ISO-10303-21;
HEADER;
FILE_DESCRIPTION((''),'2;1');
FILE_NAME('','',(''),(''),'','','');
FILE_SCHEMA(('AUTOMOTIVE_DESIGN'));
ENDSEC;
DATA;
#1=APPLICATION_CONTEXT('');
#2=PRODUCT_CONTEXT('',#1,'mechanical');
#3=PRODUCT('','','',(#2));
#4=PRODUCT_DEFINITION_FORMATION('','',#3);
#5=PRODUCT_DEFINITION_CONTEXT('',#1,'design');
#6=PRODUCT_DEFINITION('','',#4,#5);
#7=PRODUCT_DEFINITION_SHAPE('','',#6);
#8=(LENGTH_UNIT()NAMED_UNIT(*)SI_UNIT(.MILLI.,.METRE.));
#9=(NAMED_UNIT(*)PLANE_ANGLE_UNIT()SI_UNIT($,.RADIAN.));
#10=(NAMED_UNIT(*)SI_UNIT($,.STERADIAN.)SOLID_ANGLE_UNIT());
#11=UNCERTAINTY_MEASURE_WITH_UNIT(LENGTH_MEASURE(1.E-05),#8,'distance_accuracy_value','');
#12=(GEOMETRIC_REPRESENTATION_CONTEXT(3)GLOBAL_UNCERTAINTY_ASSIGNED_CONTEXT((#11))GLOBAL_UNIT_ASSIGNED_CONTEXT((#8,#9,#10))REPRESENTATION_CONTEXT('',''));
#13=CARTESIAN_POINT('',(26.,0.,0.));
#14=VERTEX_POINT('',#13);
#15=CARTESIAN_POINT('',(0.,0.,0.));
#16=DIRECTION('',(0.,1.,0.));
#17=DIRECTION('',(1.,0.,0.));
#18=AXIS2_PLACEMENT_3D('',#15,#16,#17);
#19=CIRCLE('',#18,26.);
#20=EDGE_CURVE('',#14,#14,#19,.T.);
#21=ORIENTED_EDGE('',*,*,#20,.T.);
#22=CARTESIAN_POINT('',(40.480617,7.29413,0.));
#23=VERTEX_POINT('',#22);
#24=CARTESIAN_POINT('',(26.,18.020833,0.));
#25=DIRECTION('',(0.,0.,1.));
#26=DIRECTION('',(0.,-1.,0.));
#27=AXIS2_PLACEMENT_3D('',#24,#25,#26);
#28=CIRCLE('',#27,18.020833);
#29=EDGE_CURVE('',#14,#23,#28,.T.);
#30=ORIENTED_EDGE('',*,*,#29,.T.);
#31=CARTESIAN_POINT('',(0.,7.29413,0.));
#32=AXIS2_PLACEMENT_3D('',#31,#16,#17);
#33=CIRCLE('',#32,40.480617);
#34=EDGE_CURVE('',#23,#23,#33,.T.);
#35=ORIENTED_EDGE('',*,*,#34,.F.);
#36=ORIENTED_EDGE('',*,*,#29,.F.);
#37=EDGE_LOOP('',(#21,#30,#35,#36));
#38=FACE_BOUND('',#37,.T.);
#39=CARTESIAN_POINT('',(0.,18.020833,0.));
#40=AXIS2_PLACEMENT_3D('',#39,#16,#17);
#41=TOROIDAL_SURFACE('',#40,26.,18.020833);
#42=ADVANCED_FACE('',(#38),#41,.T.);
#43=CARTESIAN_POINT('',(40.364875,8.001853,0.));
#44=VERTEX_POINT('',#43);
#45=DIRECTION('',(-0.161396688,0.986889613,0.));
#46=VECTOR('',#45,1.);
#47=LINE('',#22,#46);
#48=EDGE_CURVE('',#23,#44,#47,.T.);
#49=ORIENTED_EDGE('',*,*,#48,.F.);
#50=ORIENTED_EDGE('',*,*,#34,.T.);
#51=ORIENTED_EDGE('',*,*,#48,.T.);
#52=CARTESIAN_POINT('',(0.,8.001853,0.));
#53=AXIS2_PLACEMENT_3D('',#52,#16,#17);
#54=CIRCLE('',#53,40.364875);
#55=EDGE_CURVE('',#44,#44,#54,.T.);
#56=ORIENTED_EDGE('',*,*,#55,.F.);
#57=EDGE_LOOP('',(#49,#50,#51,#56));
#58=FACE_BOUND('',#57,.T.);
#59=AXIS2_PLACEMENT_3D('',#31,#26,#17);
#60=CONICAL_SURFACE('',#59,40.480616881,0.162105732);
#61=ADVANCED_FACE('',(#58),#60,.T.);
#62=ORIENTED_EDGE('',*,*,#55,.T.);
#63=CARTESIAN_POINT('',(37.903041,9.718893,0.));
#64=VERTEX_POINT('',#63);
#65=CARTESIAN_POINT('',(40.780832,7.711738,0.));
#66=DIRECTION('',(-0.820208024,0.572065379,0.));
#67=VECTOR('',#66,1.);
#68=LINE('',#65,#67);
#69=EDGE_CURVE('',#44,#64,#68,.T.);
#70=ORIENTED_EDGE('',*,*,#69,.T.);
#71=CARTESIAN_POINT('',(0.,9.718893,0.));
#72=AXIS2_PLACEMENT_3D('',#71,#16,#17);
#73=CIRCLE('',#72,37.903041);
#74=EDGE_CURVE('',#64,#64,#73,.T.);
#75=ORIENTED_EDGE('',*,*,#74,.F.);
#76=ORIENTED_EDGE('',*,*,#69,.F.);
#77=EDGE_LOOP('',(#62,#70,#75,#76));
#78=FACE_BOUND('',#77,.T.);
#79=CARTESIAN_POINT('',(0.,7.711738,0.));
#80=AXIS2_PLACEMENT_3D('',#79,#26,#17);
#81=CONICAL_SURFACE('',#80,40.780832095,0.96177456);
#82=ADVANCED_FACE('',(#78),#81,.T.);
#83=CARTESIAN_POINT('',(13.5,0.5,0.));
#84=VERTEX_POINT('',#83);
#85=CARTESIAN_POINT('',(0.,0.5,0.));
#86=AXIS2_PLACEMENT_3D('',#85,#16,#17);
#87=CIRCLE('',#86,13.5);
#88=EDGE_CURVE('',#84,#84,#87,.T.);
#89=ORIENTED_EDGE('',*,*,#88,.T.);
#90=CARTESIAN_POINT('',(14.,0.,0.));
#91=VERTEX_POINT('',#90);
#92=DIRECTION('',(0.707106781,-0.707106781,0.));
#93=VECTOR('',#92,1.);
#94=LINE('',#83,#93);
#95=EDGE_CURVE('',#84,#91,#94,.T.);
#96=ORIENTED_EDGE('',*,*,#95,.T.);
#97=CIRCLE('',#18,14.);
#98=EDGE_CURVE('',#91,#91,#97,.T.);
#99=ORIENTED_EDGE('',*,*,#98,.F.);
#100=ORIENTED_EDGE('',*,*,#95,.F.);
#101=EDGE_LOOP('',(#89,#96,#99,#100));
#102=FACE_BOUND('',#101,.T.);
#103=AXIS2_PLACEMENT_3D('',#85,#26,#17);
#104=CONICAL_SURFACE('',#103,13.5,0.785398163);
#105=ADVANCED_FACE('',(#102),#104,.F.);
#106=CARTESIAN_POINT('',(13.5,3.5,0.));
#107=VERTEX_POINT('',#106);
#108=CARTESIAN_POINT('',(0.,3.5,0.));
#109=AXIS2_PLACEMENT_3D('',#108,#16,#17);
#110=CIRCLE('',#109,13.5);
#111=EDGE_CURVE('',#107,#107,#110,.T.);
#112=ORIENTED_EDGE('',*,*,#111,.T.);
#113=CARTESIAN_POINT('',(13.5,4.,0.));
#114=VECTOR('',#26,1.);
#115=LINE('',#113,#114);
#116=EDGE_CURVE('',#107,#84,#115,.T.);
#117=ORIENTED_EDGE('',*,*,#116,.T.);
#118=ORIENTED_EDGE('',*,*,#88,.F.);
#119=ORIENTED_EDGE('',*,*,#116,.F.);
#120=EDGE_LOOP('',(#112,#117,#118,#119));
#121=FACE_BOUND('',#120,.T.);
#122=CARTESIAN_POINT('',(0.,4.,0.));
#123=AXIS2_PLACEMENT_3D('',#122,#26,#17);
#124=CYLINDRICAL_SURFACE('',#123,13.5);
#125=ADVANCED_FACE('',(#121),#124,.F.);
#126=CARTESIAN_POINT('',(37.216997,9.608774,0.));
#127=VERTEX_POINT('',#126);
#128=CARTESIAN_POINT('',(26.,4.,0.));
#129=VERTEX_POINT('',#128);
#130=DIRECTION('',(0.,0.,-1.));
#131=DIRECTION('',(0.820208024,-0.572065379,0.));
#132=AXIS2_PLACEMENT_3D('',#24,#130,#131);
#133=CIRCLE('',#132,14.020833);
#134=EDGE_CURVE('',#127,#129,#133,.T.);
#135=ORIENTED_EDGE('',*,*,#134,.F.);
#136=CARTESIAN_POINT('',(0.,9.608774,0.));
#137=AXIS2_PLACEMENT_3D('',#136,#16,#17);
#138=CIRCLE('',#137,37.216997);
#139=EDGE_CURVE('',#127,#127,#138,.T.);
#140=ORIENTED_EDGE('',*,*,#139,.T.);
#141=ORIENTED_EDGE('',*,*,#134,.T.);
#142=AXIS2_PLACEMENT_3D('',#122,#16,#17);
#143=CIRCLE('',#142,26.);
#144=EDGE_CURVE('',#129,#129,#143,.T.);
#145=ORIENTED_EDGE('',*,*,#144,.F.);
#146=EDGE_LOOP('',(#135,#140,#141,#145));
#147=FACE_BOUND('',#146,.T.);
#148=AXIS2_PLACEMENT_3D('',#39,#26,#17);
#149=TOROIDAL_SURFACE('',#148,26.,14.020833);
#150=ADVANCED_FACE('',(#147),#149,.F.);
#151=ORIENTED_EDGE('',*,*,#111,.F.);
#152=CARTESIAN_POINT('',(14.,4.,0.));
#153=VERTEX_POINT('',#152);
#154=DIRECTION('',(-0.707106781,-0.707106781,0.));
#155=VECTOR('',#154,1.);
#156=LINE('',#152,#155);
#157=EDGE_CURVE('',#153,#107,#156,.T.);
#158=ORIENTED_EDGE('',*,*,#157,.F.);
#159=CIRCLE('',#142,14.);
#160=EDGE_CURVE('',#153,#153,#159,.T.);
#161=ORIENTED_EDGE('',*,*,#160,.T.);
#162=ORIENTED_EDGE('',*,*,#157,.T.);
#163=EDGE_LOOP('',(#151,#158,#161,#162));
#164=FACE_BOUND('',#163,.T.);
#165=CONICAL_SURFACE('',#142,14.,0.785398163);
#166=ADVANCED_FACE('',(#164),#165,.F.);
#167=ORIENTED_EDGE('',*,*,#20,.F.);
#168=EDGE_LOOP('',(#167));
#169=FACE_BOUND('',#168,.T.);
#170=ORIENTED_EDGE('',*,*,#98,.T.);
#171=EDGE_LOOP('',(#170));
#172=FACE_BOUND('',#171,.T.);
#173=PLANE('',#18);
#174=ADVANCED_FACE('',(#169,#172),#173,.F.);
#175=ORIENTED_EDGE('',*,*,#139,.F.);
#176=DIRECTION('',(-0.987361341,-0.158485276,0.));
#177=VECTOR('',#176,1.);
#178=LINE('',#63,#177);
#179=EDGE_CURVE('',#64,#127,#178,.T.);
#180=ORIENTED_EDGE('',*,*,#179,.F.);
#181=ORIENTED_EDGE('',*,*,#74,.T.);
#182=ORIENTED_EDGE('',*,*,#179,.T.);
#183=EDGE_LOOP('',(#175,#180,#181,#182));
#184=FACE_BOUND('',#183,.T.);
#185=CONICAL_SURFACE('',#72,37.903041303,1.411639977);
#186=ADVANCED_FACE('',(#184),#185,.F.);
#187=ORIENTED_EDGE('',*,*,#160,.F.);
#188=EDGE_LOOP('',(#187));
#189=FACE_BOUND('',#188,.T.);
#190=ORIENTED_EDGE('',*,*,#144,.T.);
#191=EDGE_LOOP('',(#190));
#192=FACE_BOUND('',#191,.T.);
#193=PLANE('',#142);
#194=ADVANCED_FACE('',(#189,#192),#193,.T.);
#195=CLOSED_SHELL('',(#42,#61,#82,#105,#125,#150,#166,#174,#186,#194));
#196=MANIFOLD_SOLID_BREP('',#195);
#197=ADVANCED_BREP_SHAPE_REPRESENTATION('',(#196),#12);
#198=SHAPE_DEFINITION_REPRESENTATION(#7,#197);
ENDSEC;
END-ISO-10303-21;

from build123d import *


# Not quite as in the source:
# - a fillet or chamfer that OpenCascade refuses, or shapes differently, is made with other operations: its cross-section is extruded or revolved along the edge and cut away or added


with BuildPart() as f1:
    # F0 (on Top) → F1 (revolve)
    with BuildSketch(Plane.XY):
        with BuildLine():
            Line((26, 4), (13.5, 4))
            Line((13.5, 4), (13.5, 0))
            Line((13.5, 0), (26, 0))
            ThreePointArc((26, 0), (34.3358249123, 2.0438355847), (40.7808320951, 7.7117384844))
            Line((40.7808320951, 7.7117384844), (37.5, 10))
            ThreePointArc((37.5, 10), (32.4855608855, 5.5901749694), (26, 4))
        make_face()
    revolve(axis=Axis((0, 5.3547318093, 0), (0, 1, 0)))

    # F2: chamfer of 0.5 on 5 edges, made by hand

    # F2_s1 → F2_t2 (revolve, cut)
    with BuildSketch(Plane.XY):
        Polygon((14, 4), (13.5, 3.5), (13.5, 4), align=None)
    revolve(axis=Axis((0, 4, 0), (0, 1, 0)), mode=Mode.SUBTRACT)

    # F2_s3 → F2_t4 (revolve, cut)
    with BuildSketch(Plane.XY):
        Polygon((13.5, 0.5), (14, 0), (13.5, 0), align=None)
    revolve(axis=Axis((0, 0, 0), (0, 1, 0)), mode=Mode.SUBTRACT)

    # F2_s5 → F2_t6 (revolve, cut)
    with BuildSketch(Plane.XY):
        with BuildLine():
            Line((37.9030413035, 9.7188932937), (37.2169968397, 9.608773582))
            ThreePointArc((37.2169968397, 9.608773582), (37.3560341631, 9.7974365018), (37.5, 10))
            Line((37.5, 10), (37.9030413035, 9.7188932937))
        make_face()
    revolve(axis=Axis((0, 10, 0), (0, 1, 0)), mode=Mode.SUBTRACT)

    # F2_s7 → F2_t8 (revolve, cut)
    with BuildSketch(Plane.XY):
        with BuildLine():
            Line((40.4806168806, 7.2941297957), (40.3648752289, 8.0018533277))
            Line((40.3648752289, 8.0018533277), (40.7808320951, 7.7117384844))
            ThreePointArc((40.7808320951, 7.7117384844), (40.6280870104, 7.4961241001), (40.4806168806, 7.2941297957))
        make_face()
    revolve(axis=Axis((0, 7.7117384844, 0), (0, 1, 0)), mode=Mode.SUBTRACT)


solid = f1.part
